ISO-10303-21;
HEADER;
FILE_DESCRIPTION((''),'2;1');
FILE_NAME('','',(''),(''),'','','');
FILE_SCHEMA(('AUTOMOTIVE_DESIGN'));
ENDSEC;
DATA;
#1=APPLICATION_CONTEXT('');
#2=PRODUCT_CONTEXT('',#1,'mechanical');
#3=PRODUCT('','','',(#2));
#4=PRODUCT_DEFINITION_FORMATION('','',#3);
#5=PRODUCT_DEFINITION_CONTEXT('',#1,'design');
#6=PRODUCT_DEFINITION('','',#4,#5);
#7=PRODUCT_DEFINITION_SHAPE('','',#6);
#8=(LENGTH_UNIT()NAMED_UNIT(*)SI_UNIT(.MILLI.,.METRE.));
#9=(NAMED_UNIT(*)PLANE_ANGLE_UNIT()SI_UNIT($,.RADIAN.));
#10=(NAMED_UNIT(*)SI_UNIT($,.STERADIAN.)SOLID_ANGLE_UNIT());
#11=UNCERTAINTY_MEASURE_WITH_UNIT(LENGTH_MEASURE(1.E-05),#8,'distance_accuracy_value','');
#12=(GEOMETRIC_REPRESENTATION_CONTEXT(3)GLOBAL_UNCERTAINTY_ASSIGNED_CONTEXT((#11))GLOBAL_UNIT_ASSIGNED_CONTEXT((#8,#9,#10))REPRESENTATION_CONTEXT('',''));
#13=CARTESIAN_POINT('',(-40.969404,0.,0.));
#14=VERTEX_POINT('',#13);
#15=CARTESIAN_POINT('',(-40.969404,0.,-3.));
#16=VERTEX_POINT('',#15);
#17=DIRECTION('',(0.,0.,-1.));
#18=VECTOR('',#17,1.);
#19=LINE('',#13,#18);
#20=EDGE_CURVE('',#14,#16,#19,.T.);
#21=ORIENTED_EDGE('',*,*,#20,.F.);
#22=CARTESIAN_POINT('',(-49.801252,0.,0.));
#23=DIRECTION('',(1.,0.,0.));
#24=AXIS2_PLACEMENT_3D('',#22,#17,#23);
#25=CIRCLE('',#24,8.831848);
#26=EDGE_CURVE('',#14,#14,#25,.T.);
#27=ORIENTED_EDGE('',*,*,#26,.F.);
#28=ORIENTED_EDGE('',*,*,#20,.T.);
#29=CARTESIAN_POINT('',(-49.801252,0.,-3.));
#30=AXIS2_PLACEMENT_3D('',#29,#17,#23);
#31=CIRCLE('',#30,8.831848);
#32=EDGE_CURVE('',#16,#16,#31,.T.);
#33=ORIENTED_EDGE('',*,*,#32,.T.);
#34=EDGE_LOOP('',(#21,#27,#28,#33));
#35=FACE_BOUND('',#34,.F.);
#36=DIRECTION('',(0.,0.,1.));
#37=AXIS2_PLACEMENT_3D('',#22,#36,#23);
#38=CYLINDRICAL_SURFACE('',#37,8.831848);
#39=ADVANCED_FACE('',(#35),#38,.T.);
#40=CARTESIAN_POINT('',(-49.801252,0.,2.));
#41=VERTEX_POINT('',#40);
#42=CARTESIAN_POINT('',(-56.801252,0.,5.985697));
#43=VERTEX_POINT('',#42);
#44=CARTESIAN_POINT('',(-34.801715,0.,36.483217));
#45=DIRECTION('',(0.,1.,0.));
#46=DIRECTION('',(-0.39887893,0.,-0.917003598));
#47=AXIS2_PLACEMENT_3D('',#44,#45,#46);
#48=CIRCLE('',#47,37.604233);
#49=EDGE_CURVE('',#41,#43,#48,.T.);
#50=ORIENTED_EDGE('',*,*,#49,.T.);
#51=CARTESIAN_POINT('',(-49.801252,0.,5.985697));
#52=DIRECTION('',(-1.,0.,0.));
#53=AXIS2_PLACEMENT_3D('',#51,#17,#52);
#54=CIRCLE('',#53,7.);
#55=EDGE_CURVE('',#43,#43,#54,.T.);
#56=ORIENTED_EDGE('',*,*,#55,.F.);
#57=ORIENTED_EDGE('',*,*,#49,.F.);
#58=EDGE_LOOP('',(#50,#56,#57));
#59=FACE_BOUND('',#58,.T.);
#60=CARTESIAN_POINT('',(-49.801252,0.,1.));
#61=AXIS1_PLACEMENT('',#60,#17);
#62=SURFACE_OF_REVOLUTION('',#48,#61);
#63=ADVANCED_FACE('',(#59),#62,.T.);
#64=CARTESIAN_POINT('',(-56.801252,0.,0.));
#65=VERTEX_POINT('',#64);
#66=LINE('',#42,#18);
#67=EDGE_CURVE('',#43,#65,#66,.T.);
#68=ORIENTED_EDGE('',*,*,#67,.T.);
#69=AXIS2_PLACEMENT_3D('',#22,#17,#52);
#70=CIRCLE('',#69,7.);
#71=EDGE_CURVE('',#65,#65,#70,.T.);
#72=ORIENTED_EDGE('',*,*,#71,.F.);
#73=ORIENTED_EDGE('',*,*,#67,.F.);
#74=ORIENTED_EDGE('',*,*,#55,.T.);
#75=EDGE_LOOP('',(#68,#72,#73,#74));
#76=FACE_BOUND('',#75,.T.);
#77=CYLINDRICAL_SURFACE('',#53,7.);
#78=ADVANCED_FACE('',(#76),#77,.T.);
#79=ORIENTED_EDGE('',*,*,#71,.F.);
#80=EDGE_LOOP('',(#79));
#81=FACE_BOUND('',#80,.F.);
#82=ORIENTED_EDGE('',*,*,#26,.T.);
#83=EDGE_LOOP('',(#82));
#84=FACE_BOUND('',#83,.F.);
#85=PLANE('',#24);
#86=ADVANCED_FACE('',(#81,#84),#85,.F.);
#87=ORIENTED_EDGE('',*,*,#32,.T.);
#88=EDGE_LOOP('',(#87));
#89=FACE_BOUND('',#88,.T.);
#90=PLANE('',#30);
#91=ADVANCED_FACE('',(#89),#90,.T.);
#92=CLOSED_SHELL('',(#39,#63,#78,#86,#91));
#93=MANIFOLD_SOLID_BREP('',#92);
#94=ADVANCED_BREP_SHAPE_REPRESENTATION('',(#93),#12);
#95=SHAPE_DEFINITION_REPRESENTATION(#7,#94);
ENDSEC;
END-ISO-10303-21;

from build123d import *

# Parameters (mm, degrees)
F2_R     = 8.8318475898
F2_R_2   = 7
F3_DEPTH = 3


with BuildPart() as f1:
    # F0 (on Front) → F1 (revolve)
    with BuildSketch(Plane.XZ):
        with BuildLine():
            Line((-56.8012516619, 5.9856966478), (-56.8012516619, 0))
            Line((-56.8012516619, 0), (-49.8012516619, 0))
            Line((-49.8012516619, 0), (-49.8012516619, 2))
            ThreePointArc((-49.8012516619, 2), (-53.4082810787, 3.8048746811), (-56.8012516619, 5.9856966478))
        make_face()
    revolve(axis=Axis((-49.8012516619, 0, 1), (0, 0, -1)))

    # F2 (on face) → F3 (join)
    with BuildSketch(Plane(origin=(0, 0, 0), x_dir=(1, 0, 0), z_dir=(0, 0, -1))):
        with Locations((-49.8012516619, 0)):
            Circle(F2_R)
        with Locations((-49.8012516619, 0)):
            Circle(F2_R_2, mode=Mode.SUBTRACT)
        with Locations((-49.8012516619, 0)):
            Circle(F2_R_2)
    extrude(amount=F3_DEPTH)


solid = f1.part
